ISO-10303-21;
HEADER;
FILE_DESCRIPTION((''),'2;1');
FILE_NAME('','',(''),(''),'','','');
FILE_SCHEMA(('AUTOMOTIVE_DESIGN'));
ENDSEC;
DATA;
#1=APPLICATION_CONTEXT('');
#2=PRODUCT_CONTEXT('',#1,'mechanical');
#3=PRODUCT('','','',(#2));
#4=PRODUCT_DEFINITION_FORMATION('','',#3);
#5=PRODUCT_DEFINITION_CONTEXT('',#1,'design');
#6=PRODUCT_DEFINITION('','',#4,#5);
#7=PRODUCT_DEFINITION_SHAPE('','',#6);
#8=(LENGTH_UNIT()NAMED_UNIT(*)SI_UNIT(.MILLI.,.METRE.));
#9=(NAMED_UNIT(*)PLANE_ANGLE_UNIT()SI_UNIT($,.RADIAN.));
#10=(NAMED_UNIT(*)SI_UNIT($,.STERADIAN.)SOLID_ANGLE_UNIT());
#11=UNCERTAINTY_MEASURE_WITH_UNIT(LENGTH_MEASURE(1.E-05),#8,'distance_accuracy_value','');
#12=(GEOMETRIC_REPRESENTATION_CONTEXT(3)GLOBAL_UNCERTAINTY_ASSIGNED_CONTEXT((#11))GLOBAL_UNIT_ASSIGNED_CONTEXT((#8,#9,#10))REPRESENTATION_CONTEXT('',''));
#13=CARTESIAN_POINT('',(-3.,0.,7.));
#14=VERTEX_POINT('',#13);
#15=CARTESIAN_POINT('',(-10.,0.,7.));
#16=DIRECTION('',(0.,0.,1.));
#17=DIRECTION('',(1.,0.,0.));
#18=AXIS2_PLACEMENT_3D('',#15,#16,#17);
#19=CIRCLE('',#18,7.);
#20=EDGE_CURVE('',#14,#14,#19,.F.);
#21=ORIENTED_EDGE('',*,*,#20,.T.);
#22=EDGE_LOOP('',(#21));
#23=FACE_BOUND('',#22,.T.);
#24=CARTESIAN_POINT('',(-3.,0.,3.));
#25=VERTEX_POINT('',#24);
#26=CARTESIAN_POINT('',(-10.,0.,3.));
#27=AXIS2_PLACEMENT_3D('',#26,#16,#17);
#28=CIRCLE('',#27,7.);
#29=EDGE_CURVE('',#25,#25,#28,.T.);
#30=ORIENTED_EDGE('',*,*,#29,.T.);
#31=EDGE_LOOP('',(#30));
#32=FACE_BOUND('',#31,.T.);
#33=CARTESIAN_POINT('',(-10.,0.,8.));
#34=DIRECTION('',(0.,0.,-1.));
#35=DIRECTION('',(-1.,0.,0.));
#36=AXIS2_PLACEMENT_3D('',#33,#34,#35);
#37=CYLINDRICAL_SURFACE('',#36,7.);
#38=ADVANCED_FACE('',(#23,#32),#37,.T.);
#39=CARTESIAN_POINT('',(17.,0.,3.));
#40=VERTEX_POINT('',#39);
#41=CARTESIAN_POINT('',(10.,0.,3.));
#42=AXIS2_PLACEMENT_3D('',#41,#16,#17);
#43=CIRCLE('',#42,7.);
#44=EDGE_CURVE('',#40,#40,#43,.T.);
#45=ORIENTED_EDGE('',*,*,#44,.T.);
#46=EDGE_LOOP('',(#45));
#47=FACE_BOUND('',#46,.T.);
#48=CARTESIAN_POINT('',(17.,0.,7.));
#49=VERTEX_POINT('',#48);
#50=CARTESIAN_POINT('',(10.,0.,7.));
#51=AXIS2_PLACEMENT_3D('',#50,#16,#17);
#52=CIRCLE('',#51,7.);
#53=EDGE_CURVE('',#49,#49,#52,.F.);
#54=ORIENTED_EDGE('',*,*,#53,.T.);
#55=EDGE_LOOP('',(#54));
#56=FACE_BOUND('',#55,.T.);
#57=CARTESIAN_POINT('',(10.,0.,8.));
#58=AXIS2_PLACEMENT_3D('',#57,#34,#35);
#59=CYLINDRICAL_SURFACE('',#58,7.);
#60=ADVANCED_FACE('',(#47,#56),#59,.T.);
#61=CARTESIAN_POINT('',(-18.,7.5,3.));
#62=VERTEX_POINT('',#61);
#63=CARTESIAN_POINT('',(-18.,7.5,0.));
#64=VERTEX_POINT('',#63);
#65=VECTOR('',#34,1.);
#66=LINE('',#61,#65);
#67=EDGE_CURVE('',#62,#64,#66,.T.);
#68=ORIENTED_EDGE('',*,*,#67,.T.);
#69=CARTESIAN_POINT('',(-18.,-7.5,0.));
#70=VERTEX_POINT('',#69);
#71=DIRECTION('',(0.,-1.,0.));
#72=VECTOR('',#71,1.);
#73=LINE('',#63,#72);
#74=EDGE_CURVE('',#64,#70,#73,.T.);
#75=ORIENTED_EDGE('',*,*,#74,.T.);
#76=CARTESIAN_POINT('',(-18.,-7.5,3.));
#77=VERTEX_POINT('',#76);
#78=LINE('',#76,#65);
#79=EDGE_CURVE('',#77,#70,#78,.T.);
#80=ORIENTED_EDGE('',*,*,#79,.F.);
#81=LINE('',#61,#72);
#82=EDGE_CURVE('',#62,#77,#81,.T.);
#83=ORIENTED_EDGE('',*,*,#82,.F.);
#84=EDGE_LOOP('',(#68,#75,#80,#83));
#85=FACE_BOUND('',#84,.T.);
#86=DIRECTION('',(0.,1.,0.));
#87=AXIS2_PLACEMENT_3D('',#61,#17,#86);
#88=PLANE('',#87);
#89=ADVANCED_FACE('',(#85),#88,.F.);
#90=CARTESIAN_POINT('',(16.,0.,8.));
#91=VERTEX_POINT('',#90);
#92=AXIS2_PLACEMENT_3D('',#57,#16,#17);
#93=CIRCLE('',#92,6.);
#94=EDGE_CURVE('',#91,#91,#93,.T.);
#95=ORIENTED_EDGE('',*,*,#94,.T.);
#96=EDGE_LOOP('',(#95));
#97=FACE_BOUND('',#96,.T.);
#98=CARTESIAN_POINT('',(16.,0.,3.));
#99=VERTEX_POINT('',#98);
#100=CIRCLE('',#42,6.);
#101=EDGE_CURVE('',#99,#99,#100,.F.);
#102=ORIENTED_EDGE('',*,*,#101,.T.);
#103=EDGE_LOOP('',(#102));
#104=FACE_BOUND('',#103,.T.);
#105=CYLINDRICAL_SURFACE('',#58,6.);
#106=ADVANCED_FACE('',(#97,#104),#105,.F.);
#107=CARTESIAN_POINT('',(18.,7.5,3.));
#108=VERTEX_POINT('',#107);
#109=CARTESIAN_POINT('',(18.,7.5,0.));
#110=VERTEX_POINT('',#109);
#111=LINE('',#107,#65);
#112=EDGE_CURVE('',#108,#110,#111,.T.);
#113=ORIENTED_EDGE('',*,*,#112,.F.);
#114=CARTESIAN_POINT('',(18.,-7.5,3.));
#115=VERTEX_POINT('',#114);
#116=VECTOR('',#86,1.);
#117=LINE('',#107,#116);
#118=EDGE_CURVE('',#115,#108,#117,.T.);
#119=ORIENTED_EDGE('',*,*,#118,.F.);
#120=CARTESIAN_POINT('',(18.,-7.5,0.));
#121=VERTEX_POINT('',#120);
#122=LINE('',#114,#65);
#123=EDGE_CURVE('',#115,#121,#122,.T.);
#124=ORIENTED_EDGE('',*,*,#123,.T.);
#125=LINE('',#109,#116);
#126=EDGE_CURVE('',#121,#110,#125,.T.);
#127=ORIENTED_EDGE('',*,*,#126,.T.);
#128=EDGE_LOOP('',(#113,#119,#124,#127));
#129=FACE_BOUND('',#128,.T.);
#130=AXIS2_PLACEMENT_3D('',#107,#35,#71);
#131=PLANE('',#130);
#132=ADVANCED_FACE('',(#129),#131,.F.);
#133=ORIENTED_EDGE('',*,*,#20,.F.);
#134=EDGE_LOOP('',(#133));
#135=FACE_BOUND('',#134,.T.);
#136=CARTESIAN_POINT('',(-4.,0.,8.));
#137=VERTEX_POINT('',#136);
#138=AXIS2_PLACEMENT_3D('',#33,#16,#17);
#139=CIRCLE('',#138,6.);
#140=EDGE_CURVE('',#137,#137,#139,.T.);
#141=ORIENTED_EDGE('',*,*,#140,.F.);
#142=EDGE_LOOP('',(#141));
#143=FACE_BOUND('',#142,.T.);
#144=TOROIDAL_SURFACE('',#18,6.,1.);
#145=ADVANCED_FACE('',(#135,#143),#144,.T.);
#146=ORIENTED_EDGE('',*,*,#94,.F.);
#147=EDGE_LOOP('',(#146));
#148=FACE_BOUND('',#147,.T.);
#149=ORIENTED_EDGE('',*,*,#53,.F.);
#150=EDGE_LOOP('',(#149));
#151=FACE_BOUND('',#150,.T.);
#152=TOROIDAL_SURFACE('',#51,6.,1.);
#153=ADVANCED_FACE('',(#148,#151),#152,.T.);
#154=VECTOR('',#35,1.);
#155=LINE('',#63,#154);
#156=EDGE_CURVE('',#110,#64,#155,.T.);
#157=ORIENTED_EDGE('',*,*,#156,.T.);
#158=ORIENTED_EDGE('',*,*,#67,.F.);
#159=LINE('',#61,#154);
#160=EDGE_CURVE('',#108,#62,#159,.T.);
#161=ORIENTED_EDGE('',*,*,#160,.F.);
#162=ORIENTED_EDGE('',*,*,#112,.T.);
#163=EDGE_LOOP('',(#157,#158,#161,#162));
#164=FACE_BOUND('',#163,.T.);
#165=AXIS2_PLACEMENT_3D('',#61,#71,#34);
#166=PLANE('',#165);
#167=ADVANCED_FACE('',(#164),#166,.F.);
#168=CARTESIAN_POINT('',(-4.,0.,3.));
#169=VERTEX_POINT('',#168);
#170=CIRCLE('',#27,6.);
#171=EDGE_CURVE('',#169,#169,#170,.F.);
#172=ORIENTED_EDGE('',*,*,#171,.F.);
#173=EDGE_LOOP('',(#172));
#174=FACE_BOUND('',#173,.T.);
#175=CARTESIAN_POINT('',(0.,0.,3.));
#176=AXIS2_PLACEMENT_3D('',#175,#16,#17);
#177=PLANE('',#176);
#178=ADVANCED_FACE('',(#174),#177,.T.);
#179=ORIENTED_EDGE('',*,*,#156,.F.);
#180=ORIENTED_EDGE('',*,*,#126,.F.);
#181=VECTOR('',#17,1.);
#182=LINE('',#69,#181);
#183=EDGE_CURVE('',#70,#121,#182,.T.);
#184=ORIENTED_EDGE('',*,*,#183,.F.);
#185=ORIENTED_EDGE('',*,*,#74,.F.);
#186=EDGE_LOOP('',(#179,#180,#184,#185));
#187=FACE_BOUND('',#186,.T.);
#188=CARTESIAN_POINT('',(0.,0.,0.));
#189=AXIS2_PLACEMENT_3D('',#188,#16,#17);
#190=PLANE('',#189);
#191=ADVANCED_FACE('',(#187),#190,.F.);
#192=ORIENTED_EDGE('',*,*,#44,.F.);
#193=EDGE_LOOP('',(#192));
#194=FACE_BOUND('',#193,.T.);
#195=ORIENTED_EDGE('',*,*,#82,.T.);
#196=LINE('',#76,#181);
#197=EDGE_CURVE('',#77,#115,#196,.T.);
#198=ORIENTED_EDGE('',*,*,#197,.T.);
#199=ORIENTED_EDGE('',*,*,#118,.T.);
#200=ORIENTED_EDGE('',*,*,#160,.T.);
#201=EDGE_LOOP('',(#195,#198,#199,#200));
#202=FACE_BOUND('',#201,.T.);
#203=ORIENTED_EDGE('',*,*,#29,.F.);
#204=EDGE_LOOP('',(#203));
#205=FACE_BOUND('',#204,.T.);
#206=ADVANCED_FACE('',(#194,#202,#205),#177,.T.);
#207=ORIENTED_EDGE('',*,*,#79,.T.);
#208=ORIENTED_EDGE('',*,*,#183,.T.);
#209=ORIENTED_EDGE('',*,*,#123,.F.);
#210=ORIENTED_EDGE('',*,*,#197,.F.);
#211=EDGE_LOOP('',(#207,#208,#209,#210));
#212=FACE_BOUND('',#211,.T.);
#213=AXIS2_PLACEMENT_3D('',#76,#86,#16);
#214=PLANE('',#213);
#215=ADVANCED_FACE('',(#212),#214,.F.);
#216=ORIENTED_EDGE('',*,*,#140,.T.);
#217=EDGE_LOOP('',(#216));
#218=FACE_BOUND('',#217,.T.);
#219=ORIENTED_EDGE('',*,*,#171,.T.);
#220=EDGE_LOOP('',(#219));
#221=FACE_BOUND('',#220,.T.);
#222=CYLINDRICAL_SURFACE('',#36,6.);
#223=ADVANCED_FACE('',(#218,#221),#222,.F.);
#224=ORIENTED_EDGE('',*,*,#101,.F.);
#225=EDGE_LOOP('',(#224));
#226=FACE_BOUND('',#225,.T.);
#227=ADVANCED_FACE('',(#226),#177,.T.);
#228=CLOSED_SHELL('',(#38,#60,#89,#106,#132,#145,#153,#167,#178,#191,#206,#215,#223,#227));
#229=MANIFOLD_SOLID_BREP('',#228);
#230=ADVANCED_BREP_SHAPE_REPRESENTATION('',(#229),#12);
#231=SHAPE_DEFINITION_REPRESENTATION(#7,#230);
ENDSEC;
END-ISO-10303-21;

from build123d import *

# Parameters (mm, degrees)
SKETCH1_W           = 36
SKETCH1_H           = 15
BOSS_EXTRUDE1_DEPTH = 3
SKETCH2_R           = 7
SKETCH2_R_2         = 6
BOSS_EXTRUDE2_DEPTH = 5
FILLET1_R           = 1


with BuildPart() as part:
    # Sketch1 → Boss-Extrude1 (new body)
    with BuildSketch(Plane.XY):
        Rectangle(SKETCH1_W, SKETCH1_H)
    extrude(amount=BOSS_EXTRUDE1_DEPTH)

    # Sketch2 → Boss-Extrude2 (add)
    # profile 1 of 2: a face of its own
    with BuildSketch(Plane.XY.offset(3)):
        with Locations((-10, 0)):
            Circle(SKETCH2_R)
        with Locations((-10, 0)):
            Circle(SKETCH2_R_2, mode=Mode.SUBTRACT)
    # profile 2 of 2: a face of its own
    with BuildSketch(Plane.XY.offset(3)):
        with Locations((10, 0)):
            Circle(SKETCH2_R)
        with Locations((10, 0)):
            Circle(SKETCH2_R_2, mode=Mode.SUBTRACT)
    extrude(amount=BOSS_EXTRUDE2_DEPTH)

    # Fillet1
    fillet1_edges = [part.edges().sort_by_distance(p)[0] for p in [
        (-17, 0, 8),
        (3, 0, 8),
    ]]
    fillet(fillet1_edges, radius=FILLET1_R - 0.0001)  # a hair under: the kernel refuses the full size


solid = part.part
